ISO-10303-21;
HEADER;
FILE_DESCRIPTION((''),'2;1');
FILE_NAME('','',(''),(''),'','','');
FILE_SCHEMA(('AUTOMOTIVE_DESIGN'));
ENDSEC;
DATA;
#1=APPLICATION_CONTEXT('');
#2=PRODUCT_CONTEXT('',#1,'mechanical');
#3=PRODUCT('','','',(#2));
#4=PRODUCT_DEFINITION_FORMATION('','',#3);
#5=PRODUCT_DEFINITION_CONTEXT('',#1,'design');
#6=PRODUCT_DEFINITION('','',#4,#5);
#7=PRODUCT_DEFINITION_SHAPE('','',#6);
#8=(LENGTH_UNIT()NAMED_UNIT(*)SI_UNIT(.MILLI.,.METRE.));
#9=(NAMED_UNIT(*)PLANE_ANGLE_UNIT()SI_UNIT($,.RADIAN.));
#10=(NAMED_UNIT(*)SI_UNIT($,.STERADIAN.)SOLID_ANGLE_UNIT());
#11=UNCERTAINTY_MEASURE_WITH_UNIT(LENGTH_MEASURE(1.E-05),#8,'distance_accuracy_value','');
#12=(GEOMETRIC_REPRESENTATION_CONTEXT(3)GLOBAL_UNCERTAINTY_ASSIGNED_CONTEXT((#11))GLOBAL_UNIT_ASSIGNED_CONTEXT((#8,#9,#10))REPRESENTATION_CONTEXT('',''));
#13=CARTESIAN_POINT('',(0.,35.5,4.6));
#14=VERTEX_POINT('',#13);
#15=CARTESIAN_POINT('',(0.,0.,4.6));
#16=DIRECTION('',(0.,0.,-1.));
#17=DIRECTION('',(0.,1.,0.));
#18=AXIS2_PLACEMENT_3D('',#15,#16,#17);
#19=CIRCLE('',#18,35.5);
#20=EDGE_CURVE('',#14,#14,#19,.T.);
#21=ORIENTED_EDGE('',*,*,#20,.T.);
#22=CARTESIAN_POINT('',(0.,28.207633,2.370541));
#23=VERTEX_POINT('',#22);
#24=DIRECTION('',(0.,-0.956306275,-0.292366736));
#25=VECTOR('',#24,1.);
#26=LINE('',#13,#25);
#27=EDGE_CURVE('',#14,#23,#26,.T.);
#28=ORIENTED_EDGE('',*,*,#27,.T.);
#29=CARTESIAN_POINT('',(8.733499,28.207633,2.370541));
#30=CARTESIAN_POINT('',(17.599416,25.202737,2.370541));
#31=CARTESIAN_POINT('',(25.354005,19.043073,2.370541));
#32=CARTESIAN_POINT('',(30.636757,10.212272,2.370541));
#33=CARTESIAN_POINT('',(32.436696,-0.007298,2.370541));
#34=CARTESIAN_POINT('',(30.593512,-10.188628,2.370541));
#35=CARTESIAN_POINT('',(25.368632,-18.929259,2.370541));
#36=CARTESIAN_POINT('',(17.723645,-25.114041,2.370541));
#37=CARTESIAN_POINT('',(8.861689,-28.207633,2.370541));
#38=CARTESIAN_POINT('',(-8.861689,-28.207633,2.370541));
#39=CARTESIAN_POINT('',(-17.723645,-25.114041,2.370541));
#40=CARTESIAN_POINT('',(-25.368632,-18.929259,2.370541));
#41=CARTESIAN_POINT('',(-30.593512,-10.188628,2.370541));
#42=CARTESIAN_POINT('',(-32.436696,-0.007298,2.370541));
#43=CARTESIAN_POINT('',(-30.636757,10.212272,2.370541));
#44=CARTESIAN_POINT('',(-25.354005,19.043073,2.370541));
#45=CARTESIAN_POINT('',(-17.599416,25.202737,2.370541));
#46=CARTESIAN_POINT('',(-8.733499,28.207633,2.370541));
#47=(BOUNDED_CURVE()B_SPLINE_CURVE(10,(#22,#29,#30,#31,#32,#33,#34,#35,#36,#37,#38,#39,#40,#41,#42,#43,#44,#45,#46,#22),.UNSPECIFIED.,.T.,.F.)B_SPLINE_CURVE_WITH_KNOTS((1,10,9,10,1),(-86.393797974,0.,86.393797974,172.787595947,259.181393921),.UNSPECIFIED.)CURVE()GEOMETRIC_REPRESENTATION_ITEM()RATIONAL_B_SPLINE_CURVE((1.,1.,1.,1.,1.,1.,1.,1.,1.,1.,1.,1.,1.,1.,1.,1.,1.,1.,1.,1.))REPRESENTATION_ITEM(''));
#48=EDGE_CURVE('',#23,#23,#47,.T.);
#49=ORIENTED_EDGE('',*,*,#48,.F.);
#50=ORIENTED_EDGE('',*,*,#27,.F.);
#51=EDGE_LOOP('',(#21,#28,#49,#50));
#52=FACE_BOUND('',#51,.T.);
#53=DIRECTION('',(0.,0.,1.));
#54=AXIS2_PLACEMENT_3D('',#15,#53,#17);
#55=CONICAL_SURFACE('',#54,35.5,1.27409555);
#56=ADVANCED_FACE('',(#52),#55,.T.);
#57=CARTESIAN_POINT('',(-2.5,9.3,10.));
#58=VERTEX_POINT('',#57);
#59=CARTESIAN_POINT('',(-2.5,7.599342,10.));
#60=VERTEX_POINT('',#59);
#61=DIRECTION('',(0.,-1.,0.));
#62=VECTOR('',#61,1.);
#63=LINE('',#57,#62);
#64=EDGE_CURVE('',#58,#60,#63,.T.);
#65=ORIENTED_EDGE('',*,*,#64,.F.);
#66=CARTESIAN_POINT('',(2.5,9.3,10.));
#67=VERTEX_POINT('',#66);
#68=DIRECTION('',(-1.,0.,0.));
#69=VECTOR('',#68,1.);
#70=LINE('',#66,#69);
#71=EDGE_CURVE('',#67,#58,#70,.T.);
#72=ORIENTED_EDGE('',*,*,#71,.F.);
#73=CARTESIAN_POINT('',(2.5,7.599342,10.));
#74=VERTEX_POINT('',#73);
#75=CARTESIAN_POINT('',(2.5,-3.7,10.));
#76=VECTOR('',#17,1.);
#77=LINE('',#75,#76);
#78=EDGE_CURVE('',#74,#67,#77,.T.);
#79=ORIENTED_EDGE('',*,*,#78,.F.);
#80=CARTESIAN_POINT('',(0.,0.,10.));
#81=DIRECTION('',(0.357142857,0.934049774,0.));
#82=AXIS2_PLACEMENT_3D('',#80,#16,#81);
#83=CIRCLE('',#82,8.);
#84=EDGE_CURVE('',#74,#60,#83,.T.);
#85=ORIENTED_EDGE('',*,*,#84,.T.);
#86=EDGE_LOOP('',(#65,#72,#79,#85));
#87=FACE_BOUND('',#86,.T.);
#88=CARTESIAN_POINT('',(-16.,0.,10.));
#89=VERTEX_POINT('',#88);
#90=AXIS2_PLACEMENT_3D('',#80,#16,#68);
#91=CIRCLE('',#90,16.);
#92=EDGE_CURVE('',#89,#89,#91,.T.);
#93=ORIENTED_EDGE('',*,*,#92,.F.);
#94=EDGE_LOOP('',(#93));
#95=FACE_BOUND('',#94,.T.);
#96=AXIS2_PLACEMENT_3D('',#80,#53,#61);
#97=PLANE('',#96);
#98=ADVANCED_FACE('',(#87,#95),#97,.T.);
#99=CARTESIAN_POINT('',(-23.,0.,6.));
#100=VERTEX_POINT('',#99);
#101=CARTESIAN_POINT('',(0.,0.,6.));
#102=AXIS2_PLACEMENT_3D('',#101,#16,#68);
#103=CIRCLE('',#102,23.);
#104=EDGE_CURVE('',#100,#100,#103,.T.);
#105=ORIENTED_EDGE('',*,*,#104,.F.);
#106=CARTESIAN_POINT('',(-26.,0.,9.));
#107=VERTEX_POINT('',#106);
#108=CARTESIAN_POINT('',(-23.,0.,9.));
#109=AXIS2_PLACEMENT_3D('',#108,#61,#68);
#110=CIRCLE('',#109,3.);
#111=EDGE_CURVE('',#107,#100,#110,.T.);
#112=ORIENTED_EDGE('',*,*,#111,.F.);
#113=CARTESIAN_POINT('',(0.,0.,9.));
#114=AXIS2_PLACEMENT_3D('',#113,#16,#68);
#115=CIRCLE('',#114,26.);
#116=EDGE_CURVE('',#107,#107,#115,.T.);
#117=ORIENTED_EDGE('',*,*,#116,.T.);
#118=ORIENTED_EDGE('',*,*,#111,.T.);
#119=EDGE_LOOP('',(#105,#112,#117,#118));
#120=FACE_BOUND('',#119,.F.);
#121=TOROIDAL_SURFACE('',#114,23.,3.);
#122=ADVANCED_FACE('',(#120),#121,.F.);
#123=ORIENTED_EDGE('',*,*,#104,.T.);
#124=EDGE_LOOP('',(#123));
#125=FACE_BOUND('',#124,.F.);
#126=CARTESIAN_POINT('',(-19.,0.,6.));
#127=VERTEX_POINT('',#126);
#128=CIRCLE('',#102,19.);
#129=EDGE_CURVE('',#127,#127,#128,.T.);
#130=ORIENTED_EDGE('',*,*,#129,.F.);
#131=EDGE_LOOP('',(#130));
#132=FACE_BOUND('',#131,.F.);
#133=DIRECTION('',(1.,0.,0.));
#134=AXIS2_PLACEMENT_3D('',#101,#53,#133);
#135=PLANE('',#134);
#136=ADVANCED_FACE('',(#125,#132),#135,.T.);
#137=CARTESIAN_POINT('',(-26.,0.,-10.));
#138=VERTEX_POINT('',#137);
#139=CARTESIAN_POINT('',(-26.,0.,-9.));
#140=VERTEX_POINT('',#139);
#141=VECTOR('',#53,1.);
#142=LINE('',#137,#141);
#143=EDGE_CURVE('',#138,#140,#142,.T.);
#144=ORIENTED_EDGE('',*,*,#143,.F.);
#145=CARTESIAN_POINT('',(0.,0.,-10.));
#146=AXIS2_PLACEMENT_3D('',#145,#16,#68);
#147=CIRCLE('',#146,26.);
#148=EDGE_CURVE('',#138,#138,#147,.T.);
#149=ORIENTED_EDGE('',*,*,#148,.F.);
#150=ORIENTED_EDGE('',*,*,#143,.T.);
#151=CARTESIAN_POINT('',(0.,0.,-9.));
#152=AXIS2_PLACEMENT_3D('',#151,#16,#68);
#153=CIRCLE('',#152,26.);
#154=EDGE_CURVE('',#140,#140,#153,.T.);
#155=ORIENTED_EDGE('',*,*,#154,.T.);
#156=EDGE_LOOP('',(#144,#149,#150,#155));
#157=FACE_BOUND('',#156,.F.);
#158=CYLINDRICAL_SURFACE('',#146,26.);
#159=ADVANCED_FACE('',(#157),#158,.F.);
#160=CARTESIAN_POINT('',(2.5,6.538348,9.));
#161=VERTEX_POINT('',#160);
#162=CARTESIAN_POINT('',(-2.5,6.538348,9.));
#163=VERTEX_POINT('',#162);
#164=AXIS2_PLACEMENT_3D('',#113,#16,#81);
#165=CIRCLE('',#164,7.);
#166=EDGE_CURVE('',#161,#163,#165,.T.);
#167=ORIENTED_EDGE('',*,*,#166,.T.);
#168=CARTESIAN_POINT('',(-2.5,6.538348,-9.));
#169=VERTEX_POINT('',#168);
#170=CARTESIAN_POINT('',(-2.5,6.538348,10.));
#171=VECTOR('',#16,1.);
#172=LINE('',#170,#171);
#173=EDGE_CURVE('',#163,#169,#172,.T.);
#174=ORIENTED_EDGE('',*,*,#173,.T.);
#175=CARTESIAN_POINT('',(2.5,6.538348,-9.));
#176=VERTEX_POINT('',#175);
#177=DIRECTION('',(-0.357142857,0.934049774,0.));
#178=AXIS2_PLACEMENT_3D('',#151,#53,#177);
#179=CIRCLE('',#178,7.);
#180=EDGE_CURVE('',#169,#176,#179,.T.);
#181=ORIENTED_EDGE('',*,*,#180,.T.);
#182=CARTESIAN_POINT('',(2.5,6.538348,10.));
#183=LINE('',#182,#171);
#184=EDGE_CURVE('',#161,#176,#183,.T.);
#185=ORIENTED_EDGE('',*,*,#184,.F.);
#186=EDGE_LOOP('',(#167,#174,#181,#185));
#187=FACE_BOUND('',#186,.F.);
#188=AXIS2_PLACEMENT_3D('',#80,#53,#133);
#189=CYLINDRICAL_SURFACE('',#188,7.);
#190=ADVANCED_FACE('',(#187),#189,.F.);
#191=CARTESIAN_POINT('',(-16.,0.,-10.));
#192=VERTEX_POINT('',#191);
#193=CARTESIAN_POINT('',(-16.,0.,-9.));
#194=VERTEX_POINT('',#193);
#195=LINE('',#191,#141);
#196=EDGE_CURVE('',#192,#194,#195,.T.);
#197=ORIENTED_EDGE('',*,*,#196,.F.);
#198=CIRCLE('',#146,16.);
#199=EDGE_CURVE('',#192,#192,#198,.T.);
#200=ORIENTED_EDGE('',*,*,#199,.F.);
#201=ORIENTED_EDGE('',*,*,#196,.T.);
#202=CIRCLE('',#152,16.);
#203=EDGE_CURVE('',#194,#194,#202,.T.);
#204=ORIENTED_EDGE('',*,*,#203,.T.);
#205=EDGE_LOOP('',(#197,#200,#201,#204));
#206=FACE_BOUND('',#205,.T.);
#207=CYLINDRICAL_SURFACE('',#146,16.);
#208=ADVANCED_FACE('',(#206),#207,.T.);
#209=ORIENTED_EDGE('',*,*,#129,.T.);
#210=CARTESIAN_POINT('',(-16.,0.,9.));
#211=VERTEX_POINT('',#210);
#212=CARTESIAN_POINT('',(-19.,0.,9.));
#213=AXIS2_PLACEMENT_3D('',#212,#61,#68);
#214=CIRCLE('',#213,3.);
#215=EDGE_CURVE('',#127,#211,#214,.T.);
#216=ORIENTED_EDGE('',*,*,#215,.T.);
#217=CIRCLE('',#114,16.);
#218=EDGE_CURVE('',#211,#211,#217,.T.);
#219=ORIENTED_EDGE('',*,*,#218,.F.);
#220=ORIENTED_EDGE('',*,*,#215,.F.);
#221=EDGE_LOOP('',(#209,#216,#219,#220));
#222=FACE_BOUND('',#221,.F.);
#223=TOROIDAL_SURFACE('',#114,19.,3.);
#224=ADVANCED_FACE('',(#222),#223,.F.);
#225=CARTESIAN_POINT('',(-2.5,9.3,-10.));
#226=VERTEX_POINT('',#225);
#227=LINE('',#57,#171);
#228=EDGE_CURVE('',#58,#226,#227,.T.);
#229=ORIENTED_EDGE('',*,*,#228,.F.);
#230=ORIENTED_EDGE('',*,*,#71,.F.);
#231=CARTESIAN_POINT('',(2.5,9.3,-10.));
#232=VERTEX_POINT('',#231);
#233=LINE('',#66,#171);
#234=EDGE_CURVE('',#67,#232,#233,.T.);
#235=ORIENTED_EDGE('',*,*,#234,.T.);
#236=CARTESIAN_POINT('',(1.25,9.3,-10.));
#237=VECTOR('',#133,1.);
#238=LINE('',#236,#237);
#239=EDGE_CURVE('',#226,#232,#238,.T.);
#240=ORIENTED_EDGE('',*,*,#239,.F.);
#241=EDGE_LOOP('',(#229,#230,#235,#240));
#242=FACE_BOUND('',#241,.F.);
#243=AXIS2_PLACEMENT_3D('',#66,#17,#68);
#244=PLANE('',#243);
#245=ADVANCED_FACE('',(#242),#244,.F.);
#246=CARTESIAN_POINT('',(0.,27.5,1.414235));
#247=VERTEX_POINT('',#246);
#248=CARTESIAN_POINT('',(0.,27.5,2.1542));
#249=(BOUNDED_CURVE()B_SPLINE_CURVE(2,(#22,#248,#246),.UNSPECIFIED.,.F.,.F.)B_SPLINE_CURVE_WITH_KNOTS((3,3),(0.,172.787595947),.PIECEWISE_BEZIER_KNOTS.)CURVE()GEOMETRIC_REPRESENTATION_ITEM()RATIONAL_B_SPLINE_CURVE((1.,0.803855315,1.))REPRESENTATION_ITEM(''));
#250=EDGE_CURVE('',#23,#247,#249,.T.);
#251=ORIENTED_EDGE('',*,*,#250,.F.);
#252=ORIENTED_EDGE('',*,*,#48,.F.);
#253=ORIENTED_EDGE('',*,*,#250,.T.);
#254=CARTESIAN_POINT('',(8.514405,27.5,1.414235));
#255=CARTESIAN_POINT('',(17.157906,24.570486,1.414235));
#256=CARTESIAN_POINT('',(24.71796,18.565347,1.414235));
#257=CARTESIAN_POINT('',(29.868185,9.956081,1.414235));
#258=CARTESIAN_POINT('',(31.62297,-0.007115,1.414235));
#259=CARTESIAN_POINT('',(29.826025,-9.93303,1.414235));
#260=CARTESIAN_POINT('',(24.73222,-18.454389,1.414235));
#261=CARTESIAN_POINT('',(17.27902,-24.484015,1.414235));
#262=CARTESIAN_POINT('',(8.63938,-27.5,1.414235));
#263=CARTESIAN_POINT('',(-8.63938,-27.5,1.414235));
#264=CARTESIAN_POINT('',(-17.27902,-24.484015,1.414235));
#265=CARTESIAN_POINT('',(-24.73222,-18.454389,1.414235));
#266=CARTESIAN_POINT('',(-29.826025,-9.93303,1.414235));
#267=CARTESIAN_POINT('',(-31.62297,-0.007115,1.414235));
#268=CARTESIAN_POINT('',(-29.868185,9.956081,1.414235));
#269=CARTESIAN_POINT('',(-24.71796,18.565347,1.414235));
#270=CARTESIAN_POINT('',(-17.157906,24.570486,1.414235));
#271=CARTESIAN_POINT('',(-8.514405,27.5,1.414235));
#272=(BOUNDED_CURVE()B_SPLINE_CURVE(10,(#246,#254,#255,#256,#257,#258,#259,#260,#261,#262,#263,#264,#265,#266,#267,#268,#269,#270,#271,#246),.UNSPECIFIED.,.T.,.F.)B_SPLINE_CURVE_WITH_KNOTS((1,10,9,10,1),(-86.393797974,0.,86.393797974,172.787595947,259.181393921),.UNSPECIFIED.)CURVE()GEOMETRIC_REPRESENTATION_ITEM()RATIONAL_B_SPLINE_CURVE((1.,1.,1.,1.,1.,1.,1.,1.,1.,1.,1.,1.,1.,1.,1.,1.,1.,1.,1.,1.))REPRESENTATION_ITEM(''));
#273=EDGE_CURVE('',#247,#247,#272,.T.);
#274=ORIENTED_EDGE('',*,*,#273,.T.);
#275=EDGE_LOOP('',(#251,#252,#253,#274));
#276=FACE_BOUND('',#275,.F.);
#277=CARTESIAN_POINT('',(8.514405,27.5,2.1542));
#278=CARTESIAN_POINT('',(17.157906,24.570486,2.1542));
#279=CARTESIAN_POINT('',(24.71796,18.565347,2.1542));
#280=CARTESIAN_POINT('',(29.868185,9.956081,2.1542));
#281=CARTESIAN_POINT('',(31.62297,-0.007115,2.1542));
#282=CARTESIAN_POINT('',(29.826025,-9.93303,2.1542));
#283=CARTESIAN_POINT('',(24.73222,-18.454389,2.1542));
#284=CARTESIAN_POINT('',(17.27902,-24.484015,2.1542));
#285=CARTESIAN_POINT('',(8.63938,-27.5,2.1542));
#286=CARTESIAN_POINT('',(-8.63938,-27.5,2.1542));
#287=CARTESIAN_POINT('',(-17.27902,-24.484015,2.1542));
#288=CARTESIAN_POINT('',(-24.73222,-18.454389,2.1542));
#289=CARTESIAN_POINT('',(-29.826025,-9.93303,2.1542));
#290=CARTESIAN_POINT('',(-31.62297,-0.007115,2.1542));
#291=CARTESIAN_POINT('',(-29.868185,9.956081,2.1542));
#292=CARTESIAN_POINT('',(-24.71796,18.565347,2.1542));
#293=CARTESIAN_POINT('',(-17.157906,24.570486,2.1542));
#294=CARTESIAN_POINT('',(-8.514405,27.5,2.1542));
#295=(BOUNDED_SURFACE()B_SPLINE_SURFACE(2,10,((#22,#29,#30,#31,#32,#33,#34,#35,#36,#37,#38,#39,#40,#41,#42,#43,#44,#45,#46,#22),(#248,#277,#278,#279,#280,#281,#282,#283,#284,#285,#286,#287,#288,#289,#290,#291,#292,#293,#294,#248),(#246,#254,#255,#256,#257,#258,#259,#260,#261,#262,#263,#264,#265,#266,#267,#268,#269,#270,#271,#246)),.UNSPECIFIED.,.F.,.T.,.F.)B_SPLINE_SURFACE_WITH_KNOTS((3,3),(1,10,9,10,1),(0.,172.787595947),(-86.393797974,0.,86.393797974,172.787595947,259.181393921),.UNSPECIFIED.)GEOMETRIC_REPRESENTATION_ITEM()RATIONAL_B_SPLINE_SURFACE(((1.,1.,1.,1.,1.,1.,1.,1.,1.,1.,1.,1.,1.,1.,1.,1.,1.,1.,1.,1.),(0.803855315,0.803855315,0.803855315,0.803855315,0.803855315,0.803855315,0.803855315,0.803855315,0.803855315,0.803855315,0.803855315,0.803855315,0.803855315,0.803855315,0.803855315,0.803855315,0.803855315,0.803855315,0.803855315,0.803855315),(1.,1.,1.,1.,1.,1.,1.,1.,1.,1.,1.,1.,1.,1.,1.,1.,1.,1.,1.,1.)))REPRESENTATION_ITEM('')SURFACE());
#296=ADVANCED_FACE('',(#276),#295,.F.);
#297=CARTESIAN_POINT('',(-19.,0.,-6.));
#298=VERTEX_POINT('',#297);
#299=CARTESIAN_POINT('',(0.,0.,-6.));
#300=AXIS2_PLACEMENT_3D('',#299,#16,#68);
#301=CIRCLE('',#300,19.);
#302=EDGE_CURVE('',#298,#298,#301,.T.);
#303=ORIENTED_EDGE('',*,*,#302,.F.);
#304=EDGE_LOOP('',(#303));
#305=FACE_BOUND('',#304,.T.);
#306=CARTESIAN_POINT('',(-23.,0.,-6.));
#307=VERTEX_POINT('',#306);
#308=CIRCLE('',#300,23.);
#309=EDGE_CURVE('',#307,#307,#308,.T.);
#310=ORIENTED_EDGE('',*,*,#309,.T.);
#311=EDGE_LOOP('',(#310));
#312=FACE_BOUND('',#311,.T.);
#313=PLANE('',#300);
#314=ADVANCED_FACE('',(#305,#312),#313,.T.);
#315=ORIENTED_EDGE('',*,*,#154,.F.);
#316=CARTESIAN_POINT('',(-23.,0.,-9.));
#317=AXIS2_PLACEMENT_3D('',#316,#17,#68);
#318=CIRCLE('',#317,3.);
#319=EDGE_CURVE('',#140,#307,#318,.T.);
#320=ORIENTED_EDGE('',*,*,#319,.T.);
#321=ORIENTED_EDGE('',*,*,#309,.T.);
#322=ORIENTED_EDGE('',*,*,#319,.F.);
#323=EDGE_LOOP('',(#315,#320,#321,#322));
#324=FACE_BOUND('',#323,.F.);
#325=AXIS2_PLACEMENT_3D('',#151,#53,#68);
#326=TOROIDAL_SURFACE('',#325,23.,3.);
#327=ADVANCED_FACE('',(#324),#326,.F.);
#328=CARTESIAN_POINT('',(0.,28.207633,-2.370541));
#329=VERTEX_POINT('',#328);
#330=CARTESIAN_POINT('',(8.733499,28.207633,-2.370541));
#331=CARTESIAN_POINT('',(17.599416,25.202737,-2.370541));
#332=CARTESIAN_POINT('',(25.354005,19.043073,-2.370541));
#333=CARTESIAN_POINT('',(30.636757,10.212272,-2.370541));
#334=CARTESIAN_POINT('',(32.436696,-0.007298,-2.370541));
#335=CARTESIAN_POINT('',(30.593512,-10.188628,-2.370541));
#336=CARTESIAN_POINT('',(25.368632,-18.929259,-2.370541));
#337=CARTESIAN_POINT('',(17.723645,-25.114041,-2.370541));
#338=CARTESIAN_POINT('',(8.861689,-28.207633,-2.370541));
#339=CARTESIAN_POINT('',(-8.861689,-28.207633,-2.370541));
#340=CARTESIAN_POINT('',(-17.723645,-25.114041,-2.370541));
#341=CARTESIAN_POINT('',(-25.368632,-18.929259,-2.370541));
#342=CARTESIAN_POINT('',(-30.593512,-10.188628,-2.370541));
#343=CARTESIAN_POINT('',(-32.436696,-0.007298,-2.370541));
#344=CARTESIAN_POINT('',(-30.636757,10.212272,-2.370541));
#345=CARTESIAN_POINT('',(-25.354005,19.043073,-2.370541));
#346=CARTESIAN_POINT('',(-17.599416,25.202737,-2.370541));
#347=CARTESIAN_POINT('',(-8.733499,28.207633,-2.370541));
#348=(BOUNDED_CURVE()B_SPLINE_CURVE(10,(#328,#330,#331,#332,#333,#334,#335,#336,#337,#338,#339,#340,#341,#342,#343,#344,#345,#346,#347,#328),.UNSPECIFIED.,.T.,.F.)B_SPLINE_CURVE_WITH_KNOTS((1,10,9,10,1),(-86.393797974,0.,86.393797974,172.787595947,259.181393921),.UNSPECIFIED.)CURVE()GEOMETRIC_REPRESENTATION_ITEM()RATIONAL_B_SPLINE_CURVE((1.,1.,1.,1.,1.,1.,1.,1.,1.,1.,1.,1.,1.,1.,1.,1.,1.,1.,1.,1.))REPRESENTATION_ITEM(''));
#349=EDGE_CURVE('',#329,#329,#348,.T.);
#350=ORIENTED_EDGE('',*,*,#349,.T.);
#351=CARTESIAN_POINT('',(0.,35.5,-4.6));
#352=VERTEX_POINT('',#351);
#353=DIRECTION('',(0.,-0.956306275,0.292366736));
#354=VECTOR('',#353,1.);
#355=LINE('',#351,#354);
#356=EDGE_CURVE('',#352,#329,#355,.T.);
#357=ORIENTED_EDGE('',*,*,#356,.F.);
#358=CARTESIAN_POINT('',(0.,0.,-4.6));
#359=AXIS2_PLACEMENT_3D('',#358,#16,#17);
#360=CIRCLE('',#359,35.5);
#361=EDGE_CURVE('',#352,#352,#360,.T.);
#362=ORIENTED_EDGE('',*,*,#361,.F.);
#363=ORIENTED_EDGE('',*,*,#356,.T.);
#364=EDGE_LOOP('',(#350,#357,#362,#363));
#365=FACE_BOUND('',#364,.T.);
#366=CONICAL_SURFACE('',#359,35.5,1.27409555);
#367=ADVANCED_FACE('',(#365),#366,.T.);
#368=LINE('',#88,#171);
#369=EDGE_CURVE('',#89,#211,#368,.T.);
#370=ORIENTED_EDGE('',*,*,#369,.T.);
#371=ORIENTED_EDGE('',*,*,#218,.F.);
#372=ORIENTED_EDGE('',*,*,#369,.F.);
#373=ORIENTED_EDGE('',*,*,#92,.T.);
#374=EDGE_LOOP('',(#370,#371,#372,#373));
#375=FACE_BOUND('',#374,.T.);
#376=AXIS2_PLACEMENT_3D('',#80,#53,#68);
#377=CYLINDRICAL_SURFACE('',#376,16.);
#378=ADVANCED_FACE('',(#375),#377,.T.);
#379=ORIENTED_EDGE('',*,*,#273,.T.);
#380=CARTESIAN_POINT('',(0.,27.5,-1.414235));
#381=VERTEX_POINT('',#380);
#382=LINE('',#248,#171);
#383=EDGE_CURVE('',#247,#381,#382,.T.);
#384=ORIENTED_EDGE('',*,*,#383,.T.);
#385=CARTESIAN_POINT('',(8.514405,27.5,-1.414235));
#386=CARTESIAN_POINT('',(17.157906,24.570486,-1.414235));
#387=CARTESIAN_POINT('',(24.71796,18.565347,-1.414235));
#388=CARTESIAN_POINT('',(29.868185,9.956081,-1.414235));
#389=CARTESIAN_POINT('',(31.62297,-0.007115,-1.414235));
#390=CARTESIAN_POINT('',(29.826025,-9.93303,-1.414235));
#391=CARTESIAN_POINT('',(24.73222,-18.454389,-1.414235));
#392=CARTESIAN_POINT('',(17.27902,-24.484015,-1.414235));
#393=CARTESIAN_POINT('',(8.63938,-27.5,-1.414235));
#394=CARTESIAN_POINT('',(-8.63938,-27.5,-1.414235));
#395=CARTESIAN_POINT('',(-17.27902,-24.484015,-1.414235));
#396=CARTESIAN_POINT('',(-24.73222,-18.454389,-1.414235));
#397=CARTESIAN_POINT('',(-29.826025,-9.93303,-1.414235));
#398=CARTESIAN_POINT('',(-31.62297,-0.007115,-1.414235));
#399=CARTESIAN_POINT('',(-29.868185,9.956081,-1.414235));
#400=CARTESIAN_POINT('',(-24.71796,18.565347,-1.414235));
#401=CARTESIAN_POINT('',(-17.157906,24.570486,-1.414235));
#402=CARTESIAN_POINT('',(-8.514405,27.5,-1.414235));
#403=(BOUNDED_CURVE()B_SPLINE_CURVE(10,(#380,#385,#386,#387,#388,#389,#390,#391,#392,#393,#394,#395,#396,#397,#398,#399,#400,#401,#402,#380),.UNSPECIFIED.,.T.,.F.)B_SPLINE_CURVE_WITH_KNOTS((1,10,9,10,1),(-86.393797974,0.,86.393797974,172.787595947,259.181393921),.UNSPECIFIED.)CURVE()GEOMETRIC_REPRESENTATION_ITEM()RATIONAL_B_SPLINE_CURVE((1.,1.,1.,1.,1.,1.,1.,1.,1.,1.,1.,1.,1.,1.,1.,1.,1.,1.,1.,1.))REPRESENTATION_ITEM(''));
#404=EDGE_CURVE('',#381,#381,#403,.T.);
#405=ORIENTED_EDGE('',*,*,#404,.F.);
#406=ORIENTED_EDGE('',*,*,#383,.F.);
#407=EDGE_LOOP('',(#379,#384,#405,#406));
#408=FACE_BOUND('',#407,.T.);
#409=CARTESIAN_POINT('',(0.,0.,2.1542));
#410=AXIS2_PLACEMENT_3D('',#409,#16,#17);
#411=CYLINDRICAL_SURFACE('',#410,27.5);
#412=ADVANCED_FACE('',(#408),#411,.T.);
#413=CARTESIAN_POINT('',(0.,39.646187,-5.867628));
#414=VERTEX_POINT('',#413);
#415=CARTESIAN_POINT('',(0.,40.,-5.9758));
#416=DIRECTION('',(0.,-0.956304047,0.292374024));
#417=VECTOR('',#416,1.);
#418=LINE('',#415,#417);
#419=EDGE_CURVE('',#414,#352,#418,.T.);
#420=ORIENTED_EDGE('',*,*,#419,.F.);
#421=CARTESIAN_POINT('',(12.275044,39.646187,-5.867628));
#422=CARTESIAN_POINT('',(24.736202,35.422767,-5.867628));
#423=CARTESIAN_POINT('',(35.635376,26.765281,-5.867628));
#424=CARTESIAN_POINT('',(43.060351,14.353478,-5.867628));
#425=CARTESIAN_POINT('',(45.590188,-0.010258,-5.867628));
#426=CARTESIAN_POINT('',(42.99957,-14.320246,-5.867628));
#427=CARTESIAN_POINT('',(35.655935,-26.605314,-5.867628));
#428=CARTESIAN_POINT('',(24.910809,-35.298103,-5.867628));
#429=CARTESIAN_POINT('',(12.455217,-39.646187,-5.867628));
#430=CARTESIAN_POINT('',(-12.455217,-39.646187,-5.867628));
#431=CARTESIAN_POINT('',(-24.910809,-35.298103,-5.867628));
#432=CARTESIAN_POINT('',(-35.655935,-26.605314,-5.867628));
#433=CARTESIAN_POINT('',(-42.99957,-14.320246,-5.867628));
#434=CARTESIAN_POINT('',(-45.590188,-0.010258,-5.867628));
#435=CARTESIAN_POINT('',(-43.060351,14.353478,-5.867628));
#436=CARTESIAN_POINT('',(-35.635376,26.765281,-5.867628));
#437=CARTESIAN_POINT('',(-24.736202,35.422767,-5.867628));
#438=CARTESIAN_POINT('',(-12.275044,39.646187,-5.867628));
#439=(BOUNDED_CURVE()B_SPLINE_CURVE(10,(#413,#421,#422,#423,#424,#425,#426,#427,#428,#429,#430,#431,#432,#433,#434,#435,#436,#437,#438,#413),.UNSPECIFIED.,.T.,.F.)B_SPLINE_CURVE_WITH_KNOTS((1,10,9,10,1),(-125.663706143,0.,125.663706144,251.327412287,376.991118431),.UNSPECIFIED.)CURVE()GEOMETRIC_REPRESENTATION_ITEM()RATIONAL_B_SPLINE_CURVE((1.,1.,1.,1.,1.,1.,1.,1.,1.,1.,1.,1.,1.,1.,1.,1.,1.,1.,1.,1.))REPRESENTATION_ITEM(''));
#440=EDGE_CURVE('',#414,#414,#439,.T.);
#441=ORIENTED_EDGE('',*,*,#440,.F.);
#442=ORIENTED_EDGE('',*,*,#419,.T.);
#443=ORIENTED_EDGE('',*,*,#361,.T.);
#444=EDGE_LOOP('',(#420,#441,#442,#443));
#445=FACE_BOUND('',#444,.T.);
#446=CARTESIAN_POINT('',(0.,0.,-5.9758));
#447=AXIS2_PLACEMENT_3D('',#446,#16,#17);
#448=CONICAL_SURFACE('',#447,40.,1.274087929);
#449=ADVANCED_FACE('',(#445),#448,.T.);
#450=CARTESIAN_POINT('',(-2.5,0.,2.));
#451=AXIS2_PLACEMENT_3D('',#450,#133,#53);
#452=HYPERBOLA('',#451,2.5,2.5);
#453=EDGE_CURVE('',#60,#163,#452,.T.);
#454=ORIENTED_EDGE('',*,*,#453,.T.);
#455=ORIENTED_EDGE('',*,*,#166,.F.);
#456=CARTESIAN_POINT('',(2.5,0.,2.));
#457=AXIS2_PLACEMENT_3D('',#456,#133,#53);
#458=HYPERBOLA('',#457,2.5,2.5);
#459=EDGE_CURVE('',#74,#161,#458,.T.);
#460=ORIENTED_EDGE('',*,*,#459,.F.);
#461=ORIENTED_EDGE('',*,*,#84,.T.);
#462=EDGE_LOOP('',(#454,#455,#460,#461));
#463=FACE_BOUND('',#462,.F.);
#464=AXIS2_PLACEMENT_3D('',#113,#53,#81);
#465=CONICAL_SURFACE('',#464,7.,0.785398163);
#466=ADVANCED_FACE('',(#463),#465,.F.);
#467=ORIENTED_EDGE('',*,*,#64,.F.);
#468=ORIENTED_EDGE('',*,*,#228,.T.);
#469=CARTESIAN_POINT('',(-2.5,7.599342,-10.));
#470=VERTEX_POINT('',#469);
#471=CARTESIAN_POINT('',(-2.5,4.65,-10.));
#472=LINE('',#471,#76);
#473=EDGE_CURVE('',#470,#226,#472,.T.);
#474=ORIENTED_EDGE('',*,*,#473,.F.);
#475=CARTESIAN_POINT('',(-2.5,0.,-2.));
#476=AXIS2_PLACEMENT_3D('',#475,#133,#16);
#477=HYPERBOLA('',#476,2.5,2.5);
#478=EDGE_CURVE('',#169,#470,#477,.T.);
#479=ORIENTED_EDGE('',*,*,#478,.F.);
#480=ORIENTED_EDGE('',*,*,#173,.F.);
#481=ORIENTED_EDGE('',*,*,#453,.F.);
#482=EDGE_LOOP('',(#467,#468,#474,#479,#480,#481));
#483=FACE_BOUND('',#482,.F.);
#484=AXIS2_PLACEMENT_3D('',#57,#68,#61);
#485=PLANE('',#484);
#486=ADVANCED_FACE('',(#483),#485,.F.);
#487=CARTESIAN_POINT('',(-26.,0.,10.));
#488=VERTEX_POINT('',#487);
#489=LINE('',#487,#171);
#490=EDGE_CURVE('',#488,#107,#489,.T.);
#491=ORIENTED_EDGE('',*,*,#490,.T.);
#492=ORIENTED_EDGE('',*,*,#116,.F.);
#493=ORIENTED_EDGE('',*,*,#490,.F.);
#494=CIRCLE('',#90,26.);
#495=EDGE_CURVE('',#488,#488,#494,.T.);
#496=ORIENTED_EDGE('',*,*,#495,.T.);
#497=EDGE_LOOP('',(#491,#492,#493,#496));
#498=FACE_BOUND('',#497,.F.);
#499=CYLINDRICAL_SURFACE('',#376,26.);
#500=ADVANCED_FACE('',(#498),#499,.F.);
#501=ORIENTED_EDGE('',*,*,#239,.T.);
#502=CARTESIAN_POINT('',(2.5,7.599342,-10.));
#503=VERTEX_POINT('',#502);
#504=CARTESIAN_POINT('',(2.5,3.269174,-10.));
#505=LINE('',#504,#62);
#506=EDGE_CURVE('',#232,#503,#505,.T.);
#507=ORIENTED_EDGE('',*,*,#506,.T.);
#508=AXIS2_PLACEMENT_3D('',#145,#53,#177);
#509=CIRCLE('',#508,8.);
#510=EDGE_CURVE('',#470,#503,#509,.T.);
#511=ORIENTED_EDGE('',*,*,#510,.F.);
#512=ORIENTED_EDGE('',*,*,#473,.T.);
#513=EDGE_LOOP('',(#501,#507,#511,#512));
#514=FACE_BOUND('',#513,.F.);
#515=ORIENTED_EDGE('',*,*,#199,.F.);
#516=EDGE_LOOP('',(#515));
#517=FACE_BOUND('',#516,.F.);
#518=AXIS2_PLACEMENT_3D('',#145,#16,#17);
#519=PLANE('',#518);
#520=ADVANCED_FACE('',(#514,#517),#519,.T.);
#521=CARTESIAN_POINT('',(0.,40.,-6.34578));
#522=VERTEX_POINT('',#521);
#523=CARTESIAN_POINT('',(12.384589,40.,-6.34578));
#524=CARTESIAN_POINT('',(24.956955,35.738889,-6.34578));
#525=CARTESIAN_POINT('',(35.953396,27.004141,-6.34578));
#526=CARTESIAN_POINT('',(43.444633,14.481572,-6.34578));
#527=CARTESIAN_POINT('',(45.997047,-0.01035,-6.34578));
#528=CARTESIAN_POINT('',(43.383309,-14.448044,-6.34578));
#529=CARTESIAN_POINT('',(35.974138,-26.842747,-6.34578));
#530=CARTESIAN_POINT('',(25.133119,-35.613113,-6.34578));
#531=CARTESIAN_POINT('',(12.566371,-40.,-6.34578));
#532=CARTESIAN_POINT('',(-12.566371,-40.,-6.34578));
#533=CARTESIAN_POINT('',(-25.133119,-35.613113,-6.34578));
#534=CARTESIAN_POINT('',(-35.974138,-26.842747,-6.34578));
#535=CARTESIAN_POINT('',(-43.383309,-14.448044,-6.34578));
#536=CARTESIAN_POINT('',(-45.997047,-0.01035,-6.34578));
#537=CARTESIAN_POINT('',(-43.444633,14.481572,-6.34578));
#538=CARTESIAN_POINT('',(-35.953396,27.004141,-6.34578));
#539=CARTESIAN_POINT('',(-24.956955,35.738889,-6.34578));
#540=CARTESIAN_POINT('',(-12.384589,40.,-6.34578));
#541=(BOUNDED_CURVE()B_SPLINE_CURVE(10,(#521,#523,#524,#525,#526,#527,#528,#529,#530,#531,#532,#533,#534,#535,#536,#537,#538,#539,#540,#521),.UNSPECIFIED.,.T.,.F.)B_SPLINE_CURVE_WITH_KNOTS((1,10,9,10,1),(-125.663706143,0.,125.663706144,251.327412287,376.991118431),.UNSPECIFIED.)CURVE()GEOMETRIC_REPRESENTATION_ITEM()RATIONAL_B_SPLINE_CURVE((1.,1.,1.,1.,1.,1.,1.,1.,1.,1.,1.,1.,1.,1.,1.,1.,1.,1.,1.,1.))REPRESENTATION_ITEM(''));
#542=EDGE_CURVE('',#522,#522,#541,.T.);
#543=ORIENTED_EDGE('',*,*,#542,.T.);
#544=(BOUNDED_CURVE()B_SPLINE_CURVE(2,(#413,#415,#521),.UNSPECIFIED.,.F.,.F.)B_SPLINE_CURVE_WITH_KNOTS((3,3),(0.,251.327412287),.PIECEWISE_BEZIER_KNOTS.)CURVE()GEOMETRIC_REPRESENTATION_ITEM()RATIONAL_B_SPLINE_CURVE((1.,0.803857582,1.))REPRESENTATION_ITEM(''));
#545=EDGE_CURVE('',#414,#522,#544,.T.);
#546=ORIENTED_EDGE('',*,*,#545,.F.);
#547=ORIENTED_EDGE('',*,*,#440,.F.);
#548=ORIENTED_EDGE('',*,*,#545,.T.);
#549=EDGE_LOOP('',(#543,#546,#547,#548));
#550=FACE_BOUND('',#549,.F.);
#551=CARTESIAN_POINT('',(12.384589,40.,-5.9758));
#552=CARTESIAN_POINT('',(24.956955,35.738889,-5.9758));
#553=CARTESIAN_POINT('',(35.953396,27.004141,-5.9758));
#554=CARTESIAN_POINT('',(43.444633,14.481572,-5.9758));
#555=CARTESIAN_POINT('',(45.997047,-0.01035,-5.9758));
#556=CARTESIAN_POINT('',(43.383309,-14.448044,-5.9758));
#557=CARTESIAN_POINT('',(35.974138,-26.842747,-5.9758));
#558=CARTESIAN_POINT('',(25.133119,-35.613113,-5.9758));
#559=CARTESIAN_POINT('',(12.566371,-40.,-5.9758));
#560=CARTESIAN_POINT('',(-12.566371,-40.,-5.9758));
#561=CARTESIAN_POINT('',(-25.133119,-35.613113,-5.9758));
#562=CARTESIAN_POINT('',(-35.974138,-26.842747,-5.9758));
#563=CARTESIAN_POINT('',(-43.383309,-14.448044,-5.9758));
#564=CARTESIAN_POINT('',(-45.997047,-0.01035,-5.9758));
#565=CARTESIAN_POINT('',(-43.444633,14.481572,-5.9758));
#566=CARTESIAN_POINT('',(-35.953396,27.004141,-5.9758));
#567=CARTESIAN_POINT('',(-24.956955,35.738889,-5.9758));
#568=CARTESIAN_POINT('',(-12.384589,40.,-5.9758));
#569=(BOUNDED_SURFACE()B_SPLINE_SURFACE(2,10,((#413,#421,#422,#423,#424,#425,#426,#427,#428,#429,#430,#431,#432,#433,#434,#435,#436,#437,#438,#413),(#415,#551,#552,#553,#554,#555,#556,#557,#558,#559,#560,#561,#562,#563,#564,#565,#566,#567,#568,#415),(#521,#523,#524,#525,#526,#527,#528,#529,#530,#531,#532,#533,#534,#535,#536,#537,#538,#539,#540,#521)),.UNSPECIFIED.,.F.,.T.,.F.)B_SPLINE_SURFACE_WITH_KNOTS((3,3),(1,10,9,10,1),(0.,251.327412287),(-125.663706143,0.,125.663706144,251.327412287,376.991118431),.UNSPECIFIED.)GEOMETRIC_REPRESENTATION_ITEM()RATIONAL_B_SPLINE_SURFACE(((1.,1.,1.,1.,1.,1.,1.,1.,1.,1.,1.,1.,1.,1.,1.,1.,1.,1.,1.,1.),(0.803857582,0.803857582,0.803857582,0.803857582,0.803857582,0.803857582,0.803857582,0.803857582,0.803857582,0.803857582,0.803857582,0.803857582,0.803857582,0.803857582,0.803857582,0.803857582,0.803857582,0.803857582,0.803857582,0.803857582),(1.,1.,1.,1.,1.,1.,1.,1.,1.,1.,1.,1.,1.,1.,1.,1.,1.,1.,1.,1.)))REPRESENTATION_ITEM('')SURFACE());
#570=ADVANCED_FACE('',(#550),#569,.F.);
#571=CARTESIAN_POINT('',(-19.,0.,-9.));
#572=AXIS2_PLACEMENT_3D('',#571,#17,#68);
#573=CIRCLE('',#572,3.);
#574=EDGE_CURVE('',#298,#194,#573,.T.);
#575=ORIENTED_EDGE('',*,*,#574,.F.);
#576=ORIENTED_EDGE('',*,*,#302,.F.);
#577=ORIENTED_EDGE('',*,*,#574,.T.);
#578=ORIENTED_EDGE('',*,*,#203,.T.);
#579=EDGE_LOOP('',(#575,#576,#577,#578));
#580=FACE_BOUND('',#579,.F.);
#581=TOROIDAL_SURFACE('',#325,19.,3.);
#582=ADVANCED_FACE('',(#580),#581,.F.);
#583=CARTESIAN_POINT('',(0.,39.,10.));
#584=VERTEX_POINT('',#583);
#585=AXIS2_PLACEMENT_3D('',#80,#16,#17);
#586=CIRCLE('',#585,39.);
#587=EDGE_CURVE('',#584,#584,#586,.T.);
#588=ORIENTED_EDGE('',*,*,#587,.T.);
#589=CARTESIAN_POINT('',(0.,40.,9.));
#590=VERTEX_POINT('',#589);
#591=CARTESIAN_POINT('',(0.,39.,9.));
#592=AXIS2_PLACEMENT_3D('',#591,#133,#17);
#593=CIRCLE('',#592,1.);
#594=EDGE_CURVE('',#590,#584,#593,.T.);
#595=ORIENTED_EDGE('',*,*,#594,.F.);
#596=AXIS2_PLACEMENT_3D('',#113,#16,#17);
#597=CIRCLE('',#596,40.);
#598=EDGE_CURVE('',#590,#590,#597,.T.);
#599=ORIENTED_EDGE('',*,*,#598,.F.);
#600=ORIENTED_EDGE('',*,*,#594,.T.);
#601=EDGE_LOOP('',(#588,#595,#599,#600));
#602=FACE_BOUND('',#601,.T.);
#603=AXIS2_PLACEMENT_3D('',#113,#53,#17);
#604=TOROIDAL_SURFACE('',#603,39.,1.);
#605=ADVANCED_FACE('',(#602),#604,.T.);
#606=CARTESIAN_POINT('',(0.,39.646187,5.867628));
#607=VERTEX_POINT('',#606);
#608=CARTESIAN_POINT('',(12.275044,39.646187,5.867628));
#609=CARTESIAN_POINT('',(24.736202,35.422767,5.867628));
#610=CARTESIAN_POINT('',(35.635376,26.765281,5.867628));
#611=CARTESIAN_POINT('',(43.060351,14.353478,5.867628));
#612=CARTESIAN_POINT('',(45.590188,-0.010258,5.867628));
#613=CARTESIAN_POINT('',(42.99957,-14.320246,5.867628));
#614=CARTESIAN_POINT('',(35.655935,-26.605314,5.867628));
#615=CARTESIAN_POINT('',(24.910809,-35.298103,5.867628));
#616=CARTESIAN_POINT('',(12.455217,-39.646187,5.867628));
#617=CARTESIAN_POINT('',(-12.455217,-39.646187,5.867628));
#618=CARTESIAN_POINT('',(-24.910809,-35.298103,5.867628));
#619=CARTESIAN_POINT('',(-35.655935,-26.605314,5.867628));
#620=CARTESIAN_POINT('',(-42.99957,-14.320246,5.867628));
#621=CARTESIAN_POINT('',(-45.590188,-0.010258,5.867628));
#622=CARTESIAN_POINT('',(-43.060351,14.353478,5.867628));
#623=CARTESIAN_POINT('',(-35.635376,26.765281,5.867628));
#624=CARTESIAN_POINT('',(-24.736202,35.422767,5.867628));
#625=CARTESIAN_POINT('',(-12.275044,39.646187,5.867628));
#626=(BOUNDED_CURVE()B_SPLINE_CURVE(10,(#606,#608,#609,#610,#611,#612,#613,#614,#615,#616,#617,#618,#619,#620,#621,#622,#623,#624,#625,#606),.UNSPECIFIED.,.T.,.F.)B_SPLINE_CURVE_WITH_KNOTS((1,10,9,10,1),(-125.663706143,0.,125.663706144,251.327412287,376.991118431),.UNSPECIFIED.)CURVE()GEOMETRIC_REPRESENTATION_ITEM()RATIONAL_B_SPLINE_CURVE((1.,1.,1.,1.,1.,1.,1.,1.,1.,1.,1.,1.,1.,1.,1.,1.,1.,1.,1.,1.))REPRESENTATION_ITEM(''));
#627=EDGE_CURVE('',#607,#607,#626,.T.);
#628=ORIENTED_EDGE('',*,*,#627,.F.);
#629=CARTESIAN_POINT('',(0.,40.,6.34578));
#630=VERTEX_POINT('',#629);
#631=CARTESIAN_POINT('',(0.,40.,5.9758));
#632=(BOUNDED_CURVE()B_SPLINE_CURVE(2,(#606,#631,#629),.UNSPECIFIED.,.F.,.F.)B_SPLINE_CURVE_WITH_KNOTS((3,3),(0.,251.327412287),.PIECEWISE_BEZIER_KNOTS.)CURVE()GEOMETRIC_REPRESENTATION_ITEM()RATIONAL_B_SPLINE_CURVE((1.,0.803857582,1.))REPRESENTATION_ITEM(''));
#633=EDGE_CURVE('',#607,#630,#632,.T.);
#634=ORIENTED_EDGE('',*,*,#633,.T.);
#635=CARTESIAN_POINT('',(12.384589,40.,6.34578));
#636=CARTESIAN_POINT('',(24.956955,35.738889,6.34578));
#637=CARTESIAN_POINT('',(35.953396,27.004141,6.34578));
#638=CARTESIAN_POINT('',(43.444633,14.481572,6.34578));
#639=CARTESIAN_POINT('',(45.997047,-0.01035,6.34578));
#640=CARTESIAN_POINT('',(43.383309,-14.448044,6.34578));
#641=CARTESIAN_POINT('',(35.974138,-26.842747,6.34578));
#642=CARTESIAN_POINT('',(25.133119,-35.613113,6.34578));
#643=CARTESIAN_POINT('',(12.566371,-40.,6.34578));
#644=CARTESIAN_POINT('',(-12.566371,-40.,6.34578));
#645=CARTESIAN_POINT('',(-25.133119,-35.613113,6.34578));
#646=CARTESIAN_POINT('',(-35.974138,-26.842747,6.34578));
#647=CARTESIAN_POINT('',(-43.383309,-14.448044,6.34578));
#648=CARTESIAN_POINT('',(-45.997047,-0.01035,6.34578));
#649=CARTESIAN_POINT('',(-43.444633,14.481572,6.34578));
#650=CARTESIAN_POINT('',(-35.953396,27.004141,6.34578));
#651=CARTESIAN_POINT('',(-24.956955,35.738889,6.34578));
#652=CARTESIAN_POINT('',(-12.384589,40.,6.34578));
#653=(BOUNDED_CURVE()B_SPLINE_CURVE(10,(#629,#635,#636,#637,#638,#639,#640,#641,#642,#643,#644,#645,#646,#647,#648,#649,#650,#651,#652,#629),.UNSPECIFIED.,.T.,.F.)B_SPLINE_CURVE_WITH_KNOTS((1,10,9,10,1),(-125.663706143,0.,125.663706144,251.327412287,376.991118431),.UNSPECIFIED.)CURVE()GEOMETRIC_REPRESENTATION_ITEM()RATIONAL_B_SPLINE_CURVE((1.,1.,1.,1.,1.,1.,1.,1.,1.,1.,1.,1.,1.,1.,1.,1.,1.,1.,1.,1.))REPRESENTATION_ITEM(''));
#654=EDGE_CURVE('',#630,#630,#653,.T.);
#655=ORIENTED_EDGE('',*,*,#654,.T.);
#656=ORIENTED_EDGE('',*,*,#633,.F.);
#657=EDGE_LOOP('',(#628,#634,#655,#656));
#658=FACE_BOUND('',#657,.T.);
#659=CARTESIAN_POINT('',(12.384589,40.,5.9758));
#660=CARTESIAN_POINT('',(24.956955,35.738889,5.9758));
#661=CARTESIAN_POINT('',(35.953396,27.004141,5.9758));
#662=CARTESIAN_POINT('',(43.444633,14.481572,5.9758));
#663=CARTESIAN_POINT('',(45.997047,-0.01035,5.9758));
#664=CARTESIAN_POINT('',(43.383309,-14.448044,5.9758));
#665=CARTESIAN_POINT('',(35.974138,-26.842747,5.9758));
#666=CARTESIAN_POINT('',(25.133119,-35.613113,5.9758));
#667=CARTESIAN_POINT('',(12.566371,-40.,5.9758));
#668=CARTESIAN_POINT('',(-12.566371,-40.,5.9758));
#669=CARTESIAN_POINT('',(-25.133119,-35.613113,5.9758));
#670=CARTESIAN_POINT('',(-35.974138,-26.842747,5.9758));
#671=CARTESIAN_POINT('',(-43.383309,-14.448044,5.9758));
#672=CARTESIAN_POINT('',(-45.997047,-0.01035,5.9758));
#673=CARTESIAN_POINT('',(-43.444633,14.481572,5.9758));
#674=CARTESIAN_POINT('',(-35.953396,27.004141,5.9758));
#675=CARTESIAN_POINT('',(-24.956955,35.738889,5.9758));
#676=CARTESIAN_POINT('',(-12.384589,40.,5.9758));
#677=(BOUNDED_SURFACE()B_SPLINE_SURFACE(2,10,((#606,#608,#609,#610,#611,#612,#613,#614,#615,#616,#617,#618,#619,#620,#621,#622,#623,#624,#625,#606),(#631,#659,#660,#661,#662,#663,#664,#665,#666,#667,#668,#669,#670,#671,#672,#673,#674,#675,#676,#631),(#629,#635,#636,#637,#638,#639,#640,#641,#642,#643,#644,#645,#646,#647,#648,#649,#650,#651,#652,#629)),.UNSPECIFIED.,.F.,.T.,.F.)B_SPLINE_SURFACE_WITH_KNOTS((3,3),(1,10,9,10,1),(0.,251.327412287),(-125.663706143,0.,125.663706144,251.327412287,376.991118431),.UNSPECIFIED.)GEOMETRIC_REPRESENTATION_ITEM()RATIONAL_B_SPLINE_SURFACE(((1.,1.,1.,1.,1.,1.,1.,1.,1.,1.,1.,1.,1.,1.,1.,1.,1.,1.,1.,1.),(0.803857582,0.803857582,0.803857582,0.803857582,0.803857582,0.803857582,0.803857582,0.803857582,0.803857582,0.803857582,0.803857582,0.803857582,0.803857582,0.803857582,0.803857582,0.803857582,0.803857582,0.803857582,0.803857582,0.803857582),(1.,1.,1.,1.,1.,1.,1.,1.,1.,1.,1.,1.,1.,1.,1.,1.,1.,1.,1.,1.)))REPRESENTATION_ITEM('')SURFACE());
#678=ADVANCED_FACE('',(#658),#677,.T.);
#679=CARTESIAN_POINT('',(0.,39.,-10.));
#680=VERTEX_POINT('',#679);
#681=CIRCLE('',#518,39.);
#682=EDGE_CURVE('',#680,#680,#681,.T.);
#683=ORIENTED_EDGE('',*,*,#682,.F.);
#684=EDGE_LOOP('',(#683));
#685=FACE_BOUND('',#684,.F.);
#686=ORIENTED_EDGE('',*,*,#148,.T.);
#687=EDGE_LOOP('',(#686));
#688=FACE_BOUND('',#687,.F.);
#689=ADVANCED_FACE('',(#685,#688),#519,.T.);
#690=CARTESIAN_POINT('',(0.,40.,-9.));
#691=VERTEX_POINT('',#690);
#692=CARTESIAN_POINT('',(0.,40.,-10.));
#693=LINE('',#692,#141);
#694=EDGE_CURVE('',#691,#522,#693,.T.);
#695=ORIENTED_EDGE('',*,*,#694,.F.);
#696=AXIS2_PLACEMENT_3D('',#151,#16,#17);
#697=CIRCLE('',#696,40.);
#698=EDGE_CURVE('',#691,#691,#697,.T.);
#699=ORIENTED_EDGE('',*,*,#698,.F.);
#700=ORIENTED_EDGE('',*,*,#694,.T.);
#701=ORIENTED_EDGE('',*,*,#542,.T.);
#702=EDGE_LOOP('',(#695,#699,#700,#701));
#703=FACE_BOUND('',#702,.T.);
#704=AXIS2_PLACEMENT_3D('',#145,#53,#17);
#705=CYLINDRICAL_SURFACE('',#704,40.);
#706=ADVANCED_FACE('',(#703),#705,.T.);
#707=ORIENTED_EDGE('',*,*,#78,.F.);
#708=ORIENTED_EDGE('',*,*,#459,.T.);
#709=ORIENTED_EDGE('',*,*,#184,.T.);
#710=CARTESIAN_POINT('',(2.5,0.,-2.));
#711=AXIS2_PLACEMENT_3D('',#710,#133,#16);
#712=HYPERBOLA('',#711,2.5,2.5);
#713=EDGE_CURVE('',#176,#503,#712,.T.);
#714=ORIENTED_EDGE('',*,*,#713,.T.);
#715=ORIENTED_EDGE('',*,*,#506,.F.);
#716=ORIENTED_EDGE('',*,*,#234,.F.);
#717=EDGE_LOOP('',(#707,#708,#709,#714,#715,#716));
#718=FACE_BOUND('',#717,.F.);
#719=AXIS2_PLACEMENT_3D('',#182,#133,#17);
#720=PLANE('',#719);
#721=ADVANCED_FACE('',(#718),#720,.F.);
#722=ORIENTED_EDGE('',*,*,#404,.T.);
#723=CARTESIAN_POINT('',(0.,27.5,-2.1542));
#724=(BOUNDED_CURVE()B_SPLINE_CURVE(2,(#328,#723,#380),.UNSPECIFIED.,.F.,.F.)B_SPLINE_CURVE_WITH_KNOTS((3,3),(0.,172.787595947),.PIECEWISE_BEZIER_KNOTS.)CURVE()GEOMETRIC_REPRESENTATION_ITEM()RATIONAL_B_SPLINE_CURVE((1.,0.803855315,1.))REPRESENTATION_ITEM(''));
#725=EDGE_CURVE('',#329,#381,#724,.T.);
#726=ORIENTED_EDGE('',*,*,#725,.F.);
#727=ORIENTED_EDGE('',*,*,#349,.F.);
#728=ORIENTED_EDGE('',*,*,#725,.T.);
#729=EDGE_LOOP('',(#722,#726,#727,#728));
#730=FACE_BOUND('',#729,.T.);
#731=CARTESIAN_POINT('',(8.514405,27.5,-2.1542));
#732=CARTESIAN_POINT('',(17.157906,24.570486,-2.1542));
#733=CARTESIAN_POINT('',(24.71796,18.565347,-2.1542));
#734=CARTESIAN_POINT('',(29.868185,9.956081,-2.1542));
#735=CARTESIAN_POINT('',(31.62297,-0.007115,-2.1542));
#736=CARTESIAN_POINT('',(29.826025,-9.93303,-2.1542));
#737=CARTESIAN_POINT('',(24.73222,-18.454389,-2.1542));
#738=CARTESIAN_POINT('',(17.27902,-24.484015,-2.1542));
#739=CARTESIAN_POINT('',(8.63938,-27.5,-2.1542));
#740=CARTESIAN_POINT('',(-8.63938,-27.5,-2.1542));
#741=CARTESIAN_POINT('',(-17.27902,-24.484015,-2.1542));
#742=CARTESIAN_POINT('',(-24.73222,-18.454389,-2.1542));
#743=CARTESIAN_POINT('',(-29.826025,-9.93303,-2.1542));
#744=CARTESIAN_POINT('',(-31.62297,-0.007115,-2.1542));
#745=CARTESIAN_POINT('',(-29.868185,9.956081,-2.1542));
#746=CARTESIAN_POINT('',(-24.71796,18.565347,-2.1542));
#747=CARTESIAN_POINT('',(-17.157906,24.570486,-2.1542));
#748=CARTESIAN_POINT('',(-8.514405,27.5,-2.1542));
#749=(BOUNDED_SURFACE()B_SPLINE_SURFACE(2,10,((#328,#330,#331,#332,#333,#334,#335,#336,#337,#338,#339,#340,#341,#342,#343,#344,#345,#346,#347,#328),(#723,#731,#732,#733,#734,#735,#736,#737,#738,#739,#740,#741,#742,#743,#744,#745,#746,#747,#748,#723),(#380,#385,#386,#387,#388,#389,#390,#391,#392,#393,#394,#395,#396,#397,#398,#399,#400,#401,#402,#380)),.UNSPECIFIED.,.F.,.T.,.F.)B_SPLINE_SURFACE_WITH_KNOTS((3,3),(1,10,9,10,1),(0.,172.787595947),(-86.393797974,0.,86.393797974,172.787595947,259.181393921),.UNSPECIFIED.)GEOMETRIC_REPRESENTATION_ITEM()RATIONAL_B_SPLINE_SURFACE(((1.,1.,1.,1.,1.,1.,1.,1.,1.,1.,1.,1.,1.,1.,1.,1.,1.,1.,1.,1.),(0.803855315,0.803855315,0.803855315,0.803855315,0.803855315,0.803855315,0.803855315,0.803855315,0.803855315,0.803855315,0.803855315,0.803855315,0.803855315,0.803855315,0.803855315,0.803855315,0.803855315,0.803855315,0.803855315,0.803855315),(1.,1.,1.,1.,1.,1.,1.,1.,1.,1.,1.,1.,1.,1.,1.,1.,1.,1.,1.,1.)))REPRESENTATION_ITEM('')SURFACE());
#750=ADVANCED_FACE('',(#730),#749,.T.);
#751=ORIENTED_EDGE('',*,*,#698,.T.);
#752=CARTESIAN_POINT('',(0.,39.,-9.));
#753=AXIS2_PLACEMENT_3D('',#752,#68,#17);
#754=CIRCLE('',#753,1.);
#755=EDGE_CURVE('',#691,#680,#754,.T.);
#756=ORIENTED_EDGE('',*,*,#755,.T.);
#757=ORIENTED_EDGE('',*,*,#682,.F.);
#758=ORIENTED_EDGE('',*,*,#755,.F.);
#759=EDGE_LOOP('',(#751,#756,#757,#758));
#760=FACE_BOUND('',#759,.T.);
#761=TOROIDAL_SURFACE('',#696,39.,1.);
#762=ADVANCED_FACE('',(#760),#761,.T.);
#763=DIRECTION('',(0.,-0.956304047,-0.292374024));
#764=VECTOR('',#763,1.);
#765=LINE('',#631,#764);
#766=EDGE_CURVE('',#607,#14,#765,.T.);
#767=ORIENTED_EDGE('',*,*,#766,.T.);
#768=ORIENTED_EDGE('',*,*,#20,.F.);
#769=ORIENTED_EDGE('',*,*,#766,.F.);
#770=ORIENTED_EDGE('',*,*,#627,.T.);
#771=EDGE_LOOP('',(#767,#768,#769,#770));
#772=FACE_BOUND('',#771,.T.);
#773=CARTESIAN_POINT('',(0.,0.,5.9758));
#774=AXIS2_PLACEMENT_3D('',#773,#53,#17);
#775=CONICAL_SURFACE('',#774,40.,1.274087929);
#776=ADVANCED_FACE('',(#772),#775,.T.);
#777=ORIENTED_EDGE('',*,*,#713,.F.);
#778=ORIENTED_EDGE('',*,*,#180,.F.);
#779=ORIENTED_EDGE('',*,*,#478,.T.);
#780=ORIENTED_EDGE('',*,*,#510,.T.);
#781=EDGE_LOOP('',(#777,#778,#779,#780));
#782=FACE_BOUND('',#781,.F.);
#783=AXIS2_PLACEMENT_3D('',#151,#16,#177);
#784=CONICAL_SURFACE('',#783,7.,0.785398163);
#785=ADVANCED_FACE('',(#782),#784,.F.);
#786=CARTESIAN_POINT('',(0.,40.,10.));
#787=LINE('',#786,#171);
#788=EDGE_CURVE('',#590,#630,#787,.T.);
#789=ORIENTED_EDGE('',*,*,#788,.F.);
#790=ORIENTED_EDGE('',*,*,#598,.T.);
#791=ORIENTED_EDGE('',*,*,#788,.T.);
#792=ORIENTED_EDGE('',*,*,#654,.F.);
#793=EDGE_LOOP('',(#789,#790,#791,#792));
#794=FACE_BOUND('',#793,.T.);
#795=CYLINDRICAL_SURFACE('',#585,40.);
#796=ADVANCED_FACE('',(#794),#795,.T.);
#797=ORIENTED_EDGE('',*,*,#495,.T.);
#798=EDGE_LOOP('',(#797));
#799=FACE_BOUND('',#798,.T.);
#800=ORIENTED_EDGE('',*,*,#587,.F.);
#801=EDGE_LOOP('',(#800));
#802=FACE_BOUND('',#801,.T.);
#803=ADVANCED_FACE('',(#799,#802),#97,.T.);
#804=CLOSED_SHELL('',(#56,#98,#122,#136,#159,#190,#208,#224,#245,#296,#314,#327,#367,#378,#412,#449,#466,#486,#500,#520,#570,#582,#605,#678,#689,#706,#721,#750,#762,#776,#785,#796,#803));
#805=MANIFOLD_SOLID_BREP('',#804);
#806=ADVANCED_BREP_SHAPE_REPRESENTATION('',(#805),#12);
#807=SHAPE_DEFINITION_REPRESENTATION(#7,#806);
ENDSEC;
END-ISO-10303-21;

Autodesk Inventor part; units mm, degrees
ref_plane "YZ Plane" through (0, 0, 0) normal (1, 0, 0) x (0, 1, 0)
ref_plane "XZ Plane" through (0, 0, 0) normal (0, 1, 0) x (-1, 0, 0)
ref_plane "XY Plane" through (0, 0, 0) normal (0, 0, 1) x (1, 0, 0)
sketch "스케치1" plane through (0, 0, 0) normal (1, 0, 0) x (0, 1, 0)
  line L0 (0, 0) -> (0, -10)
  line L1 (0, -10) -> (40, -10)
  line L2 (40, -10) -> (40, -5.9758)
  line L3 (40, -5.9758) -> (35.5, -4.6)
  line L4 (35.5, -4.6) -> (27.5, -2.1542)
  line L5 (27.5, -2.1542) -> (27.5, 0)
  line L6 (27.5, 0) -> (0, 0)
  dimension "d0" = 35.5
  dimension "d1" = 17
  dimension "d2" = 4.6
  dimension "d3" = 4.5
  dimension "d4" = 8
  dimension "d5" = 10
revolve "회전1" add sketch "스케치1" angle 360 about axis through (0, 0, 0) along (0, 0, -1)
fillet "모깎기1" radius 0.5 1 edges at (0, -40, -5.9758)
fillet "모깎기2" radius 1 2 edges at (0, -27.5, -2.1542) (0, -40, -10)
sketch "스케치3" plane through (0, 0, -10) normal (0, 0, -1) x (-1, 0, 0)
  circle A0 centre (0, 0) radius 26
  circle A1 centre (0, 0) radius 16
  dimension "d19" = 52
  dimension "d20" = 32
extrude "돌출2" cut sketch "스케치3" against normal blind 4
fillet "모깎기4" radius 3 2 edges at (26, 0, -6) (16, 0, -6)
mirror "미러1" about plane through (0, 27.5, 0) normal (0, 0, 1) of "모깎기2", "회전1", "모깎기1", "돌출2", "모깎기4"
sketch "스케치2" plane through (0, 0, 10) normal (0, 0, 1) x (1, 0, 0)
  circle A0 centre (0, 0) radius 7
  line L0 (-2.5, -3.7) -> (2.5, -3.7)
  line L1 (2.5, -3.7) -> (2.5, 9.3)
  line L2 (2.5, 9.3) -> (-2.5, 9.3)
  line L3 (-2.5, 9.3) -> (-2.5, -3.7)
  point P0 (0, 0)
  dimension "d10" = 14
  dimension "d11" = 2.3
  dimension "d12" = 5
  dimension "d13" = 2.5
extrude "돌출1" cut sketch "스케치2" against normal up to next
chamfer "모따기1" distance 1 angle 45 2 edges at (0, -7, 10) (0, -7, -10)
properties part number "도면3-3번"
